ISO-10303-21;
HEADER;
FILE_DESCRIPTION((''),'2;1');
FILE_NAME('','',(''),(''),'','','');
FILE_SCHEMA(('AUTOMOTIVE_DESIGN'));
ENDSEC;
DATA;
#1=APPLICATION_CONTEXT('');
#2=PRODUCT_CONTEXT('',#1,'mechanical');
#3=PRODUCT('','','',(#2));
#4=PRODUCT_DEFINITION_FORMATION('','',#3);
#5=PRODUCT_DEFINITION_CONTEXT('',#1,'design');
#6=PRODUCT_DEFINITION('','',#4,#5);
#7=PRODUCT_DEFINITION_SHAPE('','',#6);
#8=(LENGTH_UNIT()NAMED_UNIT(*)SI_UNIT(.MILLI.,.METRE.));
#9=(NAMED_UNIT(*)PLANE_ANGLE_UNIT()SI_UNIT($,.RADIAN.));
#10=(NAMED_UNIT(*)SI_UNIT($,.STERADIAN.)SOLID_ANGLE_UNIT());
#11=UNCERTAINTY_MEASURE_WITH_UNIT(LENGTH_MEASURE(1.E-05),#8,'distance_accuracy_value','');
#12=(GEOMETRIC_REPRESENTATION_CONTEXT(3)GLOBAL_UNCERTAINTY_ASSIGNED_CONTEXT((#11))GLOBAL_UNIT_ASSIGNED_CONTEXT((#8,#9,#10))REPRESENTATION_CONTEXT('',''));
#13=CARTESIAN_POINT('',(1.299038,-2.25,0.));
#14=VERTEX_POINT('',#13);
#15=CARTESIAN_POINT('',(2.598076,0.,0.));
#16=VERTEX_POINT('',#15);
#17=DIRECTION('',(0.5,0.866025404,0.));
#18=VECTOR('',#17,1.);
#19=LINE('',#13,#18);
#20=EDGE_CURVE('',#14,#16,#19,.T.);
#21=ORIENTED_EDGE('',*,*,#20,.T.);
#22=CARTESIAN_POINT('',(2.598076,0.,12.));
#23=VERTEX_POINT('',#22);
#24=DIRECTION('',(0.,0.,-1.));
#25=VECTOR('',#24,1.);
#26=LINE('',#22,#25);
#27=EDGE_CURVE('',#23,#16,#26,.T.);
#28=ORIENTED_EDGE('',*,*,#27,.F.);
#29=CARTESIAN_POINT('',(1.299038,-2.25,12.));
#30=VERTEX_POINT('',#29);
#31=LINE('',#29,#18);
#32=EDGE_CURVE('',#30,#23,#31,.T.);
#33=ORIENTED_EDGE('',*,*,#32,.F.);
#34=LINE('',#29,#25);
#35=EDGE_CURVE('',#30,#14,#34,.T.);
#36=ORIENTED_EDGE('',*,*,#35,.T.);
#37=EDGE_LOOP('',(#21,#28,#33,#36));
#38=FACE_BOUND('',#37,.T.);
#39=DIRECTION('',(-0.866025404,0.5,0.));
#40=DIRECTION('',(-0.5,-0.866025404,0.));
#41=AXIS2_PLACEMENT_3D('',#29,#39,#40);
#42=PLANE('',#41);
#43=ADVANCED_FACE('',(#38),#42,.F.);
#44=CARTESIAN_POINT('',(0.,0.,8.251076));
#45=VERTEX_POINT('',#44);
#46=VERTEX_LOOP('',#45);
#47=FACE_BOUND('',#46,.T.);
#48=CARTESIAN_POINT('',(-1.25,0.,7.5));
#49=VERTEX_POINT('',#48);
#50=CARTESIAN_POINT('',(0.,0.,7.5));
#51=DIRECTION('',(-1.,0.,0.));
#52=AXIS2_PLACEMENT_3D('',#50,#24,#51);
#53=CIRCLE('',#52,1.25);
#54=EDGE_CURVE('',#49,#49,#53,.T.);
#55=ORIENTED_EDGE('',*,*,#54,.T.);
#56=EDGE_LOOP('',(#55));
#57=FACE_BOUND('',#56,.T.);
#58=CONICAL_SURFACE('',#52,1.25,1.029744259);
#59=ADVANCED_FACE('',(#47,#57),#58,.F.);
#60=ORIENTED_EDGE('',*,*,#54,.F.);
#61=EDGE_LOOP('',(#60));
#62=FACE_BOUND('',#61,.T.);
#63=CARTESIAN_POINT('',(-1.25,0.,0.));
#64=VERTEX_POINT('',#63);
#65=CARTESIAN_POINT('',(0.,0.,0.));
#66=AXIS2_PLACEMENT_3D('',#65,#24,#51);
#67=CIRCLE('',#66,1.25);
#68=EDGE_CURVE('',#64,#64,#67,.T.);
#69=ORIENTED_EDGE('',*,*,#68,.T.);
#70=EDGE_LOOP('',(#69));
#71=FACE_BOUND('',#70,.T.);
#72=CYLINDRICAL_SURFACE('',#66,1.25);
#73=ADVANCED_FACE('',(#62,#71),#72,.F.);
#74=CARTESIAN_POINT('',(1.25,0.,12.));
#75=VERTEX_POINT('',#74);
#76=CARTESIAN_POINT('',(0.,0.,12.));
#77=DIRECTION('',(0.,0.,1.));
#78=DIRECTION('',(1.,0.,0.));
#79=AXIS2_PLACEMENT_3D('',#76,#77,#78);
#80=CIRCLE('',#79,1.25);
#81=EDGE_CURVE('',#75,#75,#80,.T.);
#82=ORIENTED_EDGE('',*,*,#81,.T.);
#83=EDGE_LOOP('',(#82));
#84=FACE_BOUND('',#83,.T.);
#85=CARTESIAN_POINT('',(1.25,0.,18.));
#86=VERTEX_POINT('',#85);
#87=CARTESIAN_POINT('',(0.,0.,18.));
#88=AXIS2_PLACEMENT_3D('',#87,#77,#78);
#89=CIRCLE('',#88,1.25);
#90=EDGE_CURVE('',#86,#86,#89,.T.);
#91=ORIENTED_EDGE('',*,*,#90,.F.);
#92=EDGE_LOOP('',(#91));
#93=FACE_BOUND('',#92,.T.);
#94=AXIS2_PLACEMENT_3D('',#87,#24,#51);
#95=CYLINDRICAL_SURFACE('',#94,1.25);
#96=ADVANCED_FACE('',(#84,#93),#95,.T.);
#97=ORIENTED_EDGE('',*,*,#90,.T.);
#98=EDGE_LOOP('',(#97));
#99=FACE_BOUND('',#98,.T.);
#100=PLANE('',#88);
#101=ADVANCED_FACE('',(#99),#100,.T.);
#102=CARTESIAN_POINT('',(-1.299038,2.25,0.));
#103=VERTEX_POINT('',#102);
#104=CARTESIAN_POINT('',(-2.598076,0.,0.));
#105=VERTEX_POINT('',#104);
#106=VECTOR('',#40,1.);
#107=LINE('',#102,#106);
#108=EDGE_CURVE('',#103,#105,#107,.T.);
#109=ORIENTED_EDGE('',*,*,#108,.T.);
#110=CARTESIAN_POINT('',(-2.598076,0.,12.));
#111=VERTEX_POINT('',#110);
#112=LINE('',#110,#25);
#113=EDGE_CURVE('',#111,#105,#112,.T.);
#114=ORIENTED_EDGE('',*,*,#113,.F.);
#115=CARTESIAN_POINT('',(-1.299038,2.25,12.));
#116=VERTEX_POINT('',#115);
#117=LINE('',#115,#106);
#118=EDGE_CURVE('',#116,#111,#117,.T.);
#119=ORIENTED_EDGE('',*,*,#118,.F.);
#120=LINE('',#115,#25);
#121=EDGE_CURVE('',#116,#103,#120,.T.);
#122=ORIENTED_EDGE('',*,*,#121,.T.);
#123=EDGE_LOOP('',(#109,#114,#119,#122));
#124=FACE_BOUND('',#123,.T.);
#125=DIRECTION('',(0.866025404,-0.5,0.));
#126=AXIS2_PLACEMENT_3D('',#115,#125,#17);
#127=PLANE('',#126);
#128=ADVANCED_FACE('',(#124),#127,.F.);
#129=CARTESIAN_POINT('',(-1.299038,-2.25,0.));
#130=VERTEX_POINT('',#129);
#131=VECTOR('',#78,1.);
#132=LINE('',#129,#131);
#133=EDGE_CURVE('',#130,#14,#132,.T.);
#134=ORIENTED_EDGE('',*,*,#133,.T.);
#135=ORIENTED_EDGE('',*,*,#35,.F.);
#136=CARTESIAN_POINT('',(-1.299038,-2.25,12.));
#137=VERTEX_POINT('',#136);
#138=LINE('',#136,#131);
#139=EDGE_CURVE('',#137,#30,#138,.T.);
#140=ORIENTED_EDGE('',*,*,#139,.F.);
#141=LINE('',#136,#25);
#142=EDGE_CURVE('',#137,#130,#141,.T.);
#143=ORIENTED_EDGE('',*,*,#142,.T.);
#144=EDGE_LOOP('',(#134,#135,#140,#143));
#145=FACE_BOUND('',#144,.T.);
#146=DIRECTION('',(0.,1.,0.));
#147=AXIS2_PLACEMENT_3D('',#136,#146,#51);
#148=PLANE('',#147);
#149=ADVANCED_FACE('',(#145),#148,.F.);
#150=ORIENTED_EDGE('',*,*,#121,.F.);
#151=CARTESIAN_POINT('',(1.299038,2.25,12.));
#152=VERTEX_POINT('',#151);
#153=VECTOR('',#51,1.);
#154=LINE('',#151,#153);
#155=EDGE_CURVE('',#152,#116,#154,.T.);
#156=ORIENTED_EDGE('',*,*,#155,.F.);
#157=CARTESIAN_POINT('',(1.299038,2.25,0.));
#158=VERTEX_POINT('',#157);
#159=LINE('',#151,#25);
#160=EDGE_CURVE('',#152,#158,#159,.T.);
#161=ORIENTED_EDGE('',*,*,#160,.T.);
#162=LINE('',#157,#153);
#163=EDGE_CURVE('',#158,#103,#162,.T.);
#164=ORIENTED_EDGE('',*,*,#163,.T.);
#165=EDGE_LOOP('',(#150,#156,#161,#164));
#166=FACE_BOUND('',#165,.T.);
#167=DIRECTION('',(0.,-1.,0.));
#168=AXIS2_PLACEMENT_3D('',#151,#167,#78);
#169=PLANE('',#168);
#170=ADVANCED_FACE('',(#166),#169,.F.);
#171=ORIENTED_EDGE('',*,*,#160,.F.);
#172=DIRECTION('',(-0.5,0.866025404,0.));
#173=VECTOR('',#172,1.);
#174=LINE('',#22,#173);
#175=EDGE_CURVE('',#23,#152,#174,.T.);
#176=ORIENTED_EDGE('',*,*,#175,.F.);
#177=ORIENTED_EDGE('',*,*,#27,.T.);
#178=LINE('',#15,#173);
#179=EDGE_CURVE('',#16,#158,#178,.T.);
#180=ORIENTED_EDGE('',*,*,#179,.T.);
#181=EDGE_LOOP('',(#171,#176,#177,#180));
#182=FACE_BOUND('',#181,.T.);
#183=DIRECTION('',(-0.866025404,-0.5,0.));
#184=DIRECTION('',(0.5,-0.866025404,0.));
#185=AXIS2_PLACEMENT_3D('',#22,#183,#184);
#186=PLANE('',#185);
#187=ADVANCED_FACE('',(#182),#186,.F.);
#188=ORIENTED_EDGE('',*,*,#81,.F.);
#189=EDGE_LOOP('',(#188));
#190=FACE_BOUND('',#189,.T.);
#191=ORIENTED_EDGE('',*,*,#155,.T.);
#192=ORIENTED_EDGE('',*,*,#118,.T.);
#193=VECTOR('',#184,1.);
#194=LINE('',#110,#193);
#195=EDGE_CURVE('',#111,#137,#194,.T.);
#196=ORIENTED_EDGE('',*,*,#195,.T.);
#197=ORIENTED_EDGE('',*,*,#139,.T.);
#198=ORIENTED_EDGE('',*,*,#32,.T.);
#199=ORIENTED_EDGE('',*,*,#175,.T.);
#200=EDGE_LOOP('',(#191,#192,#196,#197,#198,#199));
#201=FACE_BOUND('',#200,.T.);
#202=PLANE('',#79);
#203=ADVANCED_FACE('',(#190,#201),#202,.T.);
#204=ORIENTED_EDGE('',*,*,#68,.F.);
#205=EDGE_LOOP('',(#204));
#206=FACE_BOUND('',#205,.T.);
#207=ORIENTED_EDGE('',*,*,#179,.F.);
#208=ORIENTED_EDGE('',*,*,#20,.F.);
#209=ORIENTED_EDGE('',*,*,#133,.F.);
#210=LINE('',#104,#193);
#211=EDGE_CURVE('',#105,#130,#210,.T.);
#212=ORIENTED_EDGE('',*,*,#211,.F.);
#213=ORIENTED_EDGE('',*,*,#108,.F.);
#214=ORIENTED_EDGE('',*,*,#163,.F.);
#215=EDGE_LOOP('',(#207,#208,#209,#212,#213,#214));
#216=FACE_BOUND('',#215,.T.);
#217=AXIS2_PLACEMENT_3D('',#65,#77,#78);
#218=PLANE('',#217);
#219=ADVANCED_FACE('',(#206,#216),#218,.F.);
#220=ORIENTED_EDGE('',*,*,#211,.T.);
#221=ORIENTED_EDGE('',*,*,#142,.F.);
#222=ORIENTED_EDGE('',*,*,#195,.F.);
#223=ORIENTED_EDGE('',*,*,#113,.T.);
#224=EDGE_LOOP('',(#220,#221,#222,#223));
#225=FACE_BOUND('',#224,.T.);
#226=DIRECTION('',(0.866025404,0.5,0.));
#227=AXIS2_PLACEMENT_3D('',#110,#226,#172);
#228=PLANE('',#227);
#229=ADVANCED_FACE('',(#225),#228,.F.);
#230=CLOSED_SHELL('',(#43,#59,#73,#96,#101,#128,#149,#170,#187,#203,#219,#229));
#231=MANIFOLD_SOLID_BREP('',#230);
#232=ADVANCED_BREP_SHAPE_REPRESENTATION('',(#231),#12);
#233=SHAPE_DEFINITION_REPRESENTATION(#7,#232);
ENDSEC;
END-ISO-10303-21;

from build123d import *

# Parameters (mm, degrees)
EXTRUDE_1_DEPTH = 12
SKETCH_2_R      = 1.25
EXTRUDE_2_DEPTH = 6


# Read off the part's stored shape, not the designer's step: M3 螺纹孔1
with BuildPart() as part:
    # 草图1 → 凸台-拉伸1 (new body)
    with BuildSketch(Plane.XY):
        Polygon((2.598076211, 0), (1.299038106, 2.25), (-1.299038106, 2.25), (-2.598076211, 0), (-1.299038106, -2.25), (1.299038106, -2.25), align=None)
    extrude(amount=EXTRUDE_1_DEPTH)

    # 草图2 → 凸台-拉伸2 (add)
    with BuildSketch(Plane.XY.offset(12)):
        Circle(SKETCH_2_R)
    extrude(amount=EXTRUDE_2_DEPTH)

    # M3 螺纹孔1 outline → M3 螺纹孔1 (revolve, cut)
    with BuildSketch(Plane.XZ):
        Polygon((1.25, 7.5), (0, 8.251075774), (0, 0), (1.25, 0), align=None)
    revolve(axis=Axis((0, 0, 0), (0, 0, 1)), mode=Mode.SUBTRACT)


solid = part.part
